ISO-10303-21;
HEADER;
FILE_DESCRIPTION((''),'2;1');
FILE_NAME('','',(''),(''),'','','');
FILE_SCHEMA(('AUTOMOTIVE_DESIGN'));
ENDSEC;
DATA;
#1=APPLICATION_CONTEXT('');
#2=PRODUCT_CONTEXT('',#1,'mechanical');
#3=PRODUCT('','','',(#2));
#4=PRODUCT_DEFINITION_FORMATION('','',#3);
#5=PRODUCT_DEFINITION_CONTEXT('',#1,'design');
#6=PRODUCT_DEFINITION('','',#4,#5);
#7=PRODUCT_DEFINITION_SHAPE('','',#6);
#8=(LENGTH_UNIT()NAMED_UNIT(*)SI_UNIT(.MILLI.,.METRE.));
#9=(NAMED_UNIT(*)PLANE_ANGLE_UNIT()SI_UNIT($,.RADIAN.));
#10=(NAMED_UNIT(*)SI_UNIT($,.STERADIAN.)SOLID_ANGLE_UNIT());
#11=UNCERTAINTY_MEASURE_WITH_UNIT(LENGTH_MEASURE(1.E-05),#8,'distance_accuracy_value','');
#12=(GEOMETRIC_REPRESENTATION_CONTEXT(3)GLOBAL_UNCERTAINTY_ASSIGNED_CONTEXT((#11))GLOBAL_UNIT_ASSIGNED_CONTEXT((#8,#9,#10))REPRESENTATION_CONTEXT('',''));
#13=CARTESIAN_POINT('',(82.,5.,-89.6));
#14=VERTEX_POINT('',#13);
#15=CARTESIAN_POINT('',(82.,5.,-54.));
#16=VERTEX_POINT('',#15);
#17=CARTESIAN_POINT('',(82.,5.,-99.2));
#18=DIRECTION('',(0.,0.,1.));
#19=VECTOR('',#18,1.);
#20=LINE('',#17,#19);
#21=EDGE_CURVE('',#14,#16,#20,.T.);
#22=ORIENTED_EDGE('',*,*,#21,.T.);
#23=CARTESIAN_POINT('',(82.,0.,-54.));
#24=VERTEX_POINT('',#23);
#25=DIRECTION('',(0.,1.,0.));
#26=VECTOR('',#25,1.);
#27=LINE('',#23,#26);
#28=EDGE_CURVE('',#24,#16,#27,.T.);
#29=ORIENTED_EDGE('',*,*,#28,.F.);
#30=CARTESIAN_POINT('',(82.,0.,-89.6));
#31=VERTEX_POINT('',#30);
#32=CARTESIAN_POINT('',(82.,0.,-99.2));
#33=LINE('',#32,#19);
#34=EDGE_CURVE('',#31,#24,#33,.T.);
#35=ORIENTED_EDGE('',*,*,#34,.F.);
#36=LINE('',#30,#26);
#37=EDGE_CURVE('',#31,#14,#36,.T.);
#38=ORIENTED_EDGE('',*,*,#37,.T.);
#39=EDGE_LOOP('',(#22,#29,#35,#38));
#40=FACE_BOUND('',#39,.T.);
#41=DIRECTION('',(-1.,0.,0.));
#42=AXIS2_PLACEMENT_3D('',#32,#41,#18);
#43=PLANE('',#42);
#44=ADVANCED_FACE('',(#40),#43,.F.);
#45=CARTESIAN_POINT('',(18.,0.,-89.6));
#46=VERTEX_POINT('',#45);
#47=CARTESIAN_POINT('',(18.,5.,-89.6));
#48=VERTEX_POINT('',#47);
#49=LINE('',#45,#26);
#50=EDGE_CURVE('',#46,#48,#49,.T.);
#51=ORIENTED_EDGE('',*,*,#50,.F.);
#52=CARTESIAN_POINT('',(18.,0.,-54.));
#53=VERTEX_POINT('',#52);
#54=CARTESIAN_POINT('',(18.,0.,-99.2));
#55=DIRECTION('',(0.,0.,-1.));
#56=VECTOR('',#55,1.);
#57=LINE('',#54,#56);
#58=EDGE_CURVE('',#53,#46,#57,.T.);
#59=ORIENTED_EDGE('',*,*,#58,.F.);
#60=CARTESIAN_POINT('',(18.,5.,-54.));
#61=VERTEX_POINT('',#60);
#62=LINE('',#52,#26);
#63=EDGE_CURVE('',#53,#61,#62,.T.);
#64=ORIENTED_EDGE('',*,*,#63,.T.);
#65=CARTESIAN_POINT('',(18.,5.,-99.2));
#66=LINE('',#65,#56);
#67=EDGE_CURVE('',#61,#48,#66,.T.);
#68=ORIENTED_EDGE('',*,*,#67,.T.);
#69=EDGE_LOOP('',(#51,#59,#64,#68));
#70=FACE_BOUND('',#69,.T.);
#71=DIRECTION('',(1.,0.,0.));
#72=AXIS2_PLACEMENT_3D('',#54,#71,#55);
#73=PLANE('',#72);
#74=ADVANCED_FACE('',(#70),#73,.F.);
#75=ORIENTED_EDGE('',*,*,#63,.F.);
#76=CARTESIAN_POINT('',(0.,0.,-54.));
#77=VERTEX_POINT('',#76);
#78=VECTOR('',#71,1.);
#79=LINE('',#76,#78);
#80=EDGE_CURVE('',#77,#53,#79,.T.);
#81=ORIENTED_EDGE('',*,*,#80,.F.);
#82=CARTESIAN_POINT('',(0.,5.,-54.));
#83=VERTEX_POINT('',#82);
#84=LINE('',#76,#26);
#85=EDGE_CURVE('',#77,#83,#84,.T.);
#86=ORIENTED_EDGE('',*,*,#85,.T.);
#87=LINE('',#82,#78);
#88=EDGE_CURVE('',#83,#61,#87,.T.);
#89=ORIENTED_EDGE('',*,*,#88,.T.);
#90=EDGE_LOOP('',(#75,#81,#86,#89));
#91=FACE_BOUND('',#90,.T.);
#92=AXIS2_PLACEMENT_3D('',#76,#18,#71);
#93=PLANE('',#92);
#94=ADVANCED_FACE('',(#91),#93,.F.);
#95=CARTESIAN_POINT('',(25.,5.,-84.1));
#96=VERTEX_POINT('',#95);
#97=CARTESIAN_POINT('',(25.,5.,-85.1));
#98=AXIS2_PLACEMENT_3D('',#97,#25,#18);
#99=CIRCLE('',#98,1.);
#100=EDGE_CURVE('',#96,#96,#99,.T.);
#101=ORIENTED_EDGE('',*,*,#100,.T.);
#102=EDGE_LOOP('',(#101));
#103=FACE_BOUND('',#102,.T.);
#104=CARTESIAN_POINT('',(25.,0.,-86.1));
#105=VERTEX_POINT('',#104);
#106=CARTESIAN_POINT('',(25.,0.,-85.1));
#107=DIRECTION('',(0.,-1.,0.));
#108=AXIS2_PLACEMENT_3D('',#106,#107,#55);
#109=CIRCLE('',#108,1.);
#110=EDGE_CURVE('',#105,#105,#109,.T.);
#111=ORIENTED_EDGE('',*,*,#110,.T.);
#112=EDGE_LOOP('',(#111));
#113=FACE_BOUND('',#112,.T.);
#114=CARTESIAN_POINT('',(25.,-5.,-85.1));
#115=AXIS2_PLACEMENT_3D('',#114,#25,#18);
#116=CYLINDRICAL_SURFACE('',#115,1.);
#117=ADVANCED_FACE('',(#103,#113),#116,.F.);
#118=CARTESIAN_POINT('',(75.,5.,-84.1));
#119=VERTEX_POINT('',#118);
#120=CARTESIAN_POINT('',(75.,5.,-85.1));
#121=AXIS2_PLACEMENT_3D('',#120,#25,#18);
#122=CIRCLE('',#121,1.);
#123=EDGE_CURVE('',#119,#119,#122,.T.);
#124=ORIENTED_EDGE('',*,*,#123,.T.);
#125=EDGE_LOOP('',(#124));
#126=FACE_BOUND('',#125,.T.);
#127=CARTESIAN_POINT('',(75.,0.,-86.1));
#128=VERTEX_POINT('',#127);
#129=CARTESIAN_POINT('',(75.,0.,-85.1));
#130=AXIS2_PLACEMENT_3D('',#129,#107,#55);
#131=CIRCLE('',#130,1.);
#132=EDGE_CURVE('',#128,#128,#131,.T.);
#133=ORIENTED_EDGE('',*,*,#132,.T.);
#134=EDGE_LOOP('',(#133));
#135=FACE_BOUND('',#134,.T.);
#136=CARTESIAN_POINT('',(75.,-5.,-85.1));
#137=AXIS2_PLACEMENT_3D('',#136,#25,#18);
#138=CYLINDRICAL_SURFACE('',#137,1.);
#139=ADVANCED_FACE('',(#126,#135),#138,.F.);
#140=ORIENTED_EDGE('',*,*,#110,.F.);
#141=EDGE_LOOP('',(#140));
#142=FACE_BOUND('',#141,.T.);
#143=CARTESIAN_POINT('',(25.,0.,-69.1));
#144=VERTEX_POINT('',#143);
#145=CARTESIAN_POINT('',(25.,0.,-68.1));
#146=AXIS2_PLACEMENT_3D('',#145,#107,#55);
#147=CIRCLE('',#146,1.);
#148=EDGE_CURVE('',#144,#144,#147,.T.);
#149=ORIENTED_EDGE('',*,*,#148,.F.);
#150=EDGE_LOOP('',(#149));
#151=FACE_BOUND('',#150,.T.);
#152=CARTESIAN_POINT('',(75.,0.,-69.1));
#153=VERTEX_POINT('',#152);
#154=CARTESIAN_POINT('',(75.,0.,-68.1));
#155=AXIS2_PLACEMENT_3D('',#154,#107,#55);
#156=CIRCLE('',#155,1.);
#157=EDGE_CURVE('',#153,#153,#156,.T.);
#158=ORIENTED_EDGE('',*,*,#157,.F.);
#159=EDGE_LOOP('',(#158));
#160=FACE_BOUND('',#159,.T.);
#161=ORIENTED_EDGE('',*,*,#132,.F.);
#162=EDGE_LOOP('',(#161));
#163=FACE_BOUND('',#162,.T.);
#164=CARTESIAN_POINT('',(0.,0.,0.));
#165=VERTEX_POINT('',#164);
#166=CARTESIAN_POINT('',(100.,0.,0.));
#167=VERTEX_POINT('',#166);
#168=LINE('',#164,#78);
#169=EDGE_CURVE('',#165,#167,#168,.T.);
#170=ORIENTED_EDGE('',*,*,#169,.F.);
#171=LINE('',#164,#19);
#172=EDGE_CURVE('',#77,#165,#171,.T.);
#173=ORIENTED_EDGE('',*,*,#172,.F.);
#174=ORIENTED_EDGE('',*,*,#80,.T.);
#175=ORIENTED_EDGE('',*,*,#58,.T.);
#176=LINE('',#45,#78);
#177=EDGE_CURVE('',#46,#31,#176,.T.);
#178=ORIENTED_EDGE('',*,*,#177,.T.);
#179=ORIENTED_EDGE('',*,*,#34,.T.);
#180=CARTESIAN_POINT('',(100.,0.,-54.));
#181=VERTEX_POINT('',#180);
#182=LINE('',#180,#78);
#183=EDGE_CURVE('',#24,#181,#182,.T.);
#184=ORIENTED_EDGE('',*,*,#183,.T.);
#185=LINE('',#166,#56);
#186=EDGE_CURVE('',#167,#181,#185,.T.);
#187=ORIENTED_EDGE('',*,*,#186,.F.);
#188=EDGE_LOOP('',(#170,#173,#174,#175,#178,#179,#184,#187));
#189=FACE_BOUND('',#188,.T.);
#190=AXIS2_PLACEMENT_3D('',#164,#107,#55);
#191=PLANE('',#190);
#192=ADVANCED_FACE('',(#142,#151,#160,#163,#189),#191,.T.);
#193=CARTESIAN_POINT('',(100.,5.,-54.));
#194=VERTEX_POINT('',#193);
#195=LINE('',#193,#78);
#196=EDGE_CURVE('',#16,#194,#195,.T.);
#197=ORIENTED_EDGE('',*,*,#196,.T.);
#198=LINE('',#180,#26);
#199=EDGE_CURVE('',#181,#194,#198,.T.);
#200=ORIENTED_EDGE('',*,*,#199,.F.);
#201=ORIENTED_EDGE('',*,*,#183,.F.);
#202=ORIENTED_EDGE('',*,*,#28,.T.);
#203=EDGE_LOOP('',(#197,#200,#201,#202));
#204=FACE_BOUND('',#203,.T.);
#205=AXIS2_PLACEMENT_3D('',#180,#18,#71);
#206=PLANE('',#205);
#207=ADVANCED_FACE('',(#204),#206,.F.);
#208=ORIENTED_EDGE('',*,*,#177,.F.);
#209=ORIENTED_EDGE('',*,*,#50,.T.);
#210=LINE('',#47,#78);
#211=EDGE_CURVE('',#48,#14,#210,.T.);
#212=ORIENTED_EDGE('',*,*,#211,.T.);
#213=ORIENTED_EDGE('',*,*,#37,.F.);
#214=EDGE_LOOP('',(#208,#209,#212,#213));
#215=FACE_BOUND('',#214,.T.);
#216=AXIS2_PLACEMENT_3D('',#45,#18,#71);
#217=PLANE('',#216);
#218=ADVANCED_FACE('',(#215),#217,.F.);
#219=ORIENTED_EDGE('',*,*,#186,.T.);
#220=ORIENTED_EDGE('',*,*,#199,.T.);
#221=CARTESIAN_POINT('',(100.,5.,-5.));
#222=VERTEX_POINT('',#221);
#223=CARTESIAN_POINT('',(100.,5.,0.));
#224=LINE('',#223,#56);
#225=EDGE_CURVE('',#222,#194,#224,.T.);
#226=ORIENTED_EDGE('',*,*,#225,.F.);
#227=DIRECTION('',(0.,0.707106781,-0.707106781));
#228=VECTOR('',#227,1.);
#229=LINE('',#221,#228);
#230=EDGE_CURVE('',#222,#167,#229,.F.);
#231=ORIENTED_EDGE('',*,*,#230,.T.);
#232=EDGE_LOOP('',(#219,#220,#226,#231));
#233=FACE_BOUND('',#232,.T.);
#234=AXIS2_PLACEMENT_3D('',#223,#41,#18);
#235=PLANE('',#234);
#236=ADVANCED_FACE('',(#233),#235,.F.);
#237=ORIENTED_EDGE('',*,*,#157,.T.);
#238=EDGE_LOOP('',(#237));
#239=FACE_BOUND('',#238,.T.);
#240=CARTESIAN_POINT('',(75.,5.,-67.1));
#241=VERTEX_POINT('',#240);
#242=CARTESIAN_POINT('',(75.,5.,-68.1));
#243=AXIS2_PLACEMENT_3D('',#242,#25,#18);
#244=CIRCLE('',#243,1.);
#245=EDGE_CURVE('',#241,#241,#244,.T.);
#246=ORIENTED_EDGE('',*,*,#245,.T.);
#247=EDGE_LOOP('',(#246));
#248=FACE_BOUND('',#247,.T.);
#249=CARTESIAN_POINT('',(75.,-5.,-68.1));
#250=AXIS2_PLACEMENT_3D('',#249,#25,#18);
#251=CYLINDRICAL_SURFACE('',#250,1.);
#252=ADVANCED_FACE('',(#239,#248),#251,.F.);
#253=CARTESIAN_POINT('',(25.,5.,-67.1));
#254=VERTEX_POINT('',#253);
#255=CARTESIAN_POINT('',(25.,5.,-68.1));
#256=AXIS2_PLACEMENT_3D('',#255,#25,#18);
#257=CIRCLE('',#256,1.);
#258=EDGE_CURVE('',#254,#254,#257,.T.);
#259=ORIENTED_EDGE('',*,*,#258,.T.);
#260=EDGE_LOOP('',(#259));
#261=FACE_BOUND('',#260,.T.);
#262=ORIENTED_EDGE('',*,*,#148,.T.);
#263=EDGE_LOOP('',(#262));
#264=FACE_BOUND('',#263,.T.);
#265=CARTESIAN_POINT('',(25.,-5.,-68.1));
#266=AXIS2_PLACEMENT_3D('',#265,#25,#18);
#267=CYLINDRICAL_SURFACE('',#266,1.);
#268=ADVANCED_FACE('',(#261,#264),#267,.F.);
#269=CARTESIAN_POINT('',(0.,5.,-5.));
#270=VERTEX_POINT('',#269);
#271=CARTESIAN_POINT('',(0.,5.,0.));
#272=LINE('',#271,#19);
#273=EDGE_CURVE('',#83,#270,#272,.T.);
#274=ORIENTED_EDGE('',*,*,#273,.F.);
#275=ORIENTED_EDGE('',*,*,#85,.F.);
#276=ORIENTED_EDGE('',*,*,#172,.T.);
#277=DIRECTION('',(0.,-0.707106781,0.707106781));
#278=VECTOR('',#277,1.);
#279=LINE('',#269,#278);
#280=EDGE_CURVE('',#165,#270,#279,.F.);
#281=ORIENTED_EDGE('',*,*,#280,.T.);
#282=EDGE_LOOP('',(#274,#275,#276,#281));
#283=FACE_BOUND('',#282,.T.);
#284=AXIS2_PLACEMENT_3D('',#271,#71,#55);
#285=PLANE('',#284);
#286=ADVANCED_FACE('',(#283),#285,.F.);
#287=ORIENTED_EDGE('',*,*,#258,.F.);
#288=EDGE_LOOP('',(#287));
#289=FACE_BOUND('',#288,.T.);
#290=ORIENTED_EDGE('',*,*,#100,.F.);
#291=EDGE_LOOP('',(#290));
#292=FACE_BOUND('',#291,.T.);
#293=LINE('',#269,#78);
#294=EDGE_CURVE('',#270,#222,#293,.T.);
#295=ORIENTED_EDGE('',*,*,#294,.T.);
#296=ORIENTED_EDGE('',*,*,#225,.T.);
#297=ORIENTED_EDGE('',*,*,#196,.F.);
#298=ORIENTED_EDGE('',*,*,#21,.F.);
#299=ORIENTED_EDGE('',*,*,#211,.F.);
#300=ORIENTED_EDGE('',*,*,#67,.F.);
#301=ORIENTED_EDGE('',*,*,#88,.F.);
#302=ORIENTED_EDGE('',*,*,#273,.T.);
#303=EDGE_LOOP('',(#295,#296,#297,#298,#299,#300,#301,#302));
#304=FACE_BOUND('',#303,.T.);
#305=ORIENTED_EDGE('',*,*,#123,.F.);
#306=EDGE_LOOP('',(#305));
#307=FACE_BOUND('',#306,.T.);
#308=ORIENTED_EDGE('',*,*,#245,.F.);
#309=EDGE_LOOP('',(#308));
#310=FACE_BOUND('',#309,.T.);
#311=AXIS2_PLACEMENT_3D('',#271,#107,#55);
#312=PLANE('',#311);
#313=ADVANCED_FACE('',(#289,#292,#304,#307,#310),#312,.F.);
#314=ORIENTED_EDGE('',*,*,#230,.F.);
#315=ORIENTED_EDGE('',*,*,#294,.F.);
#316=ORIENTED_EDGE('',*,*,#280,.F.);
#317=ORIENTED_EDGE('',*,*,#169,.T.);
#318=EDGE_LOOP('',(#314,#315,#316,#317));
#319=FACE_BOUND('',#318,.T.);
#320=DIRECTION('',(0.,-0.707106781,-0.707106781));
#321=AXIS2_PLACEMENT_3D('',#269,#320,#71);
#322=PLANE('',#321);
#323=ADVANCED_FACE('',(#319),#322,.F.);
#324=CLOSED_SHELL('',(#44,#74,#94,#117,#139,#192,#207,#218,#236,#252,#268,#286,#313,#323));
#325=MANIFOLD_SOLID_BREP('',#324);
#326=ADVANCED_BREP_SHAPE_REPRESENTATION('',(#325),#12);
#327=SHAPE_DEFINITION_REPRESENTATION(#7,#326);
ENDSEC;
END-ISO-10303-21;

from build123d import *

# Parameters (mm, degrees)
CROQUIS2_W              = 100
CROQUIS2_H              = 99.2
SALIENTE_EXTRUIR1_DEPTH = 5
CHAFL_N1_SIZE           = 5
CROQUIS3_W              = 18
CROQUIS3_H              = 45.2
CORTAR_EXTRUIR1_DEPTH   = 5
CROQUIS6_R              = 1
CORTAR_EXTRUIR3_DEPTH   = 10
CROQUIS8_W              = 64
CROQUIS8_H              = 9.6
CORTAR_EXTRUIR4_DEPTH   = 141.94552139


with BuildPart() as part:
    # Croquis2 → Saliente-Extruir1 (new body)
    with BuildSketch(Plane(origin=(0, 0, 0), x_dir=(1, 0, 0), z_dir=(0, 1, 0))):
        with Locations((50, 49.6)):
            Rectangle(CROQUIS2_W, CROQUIS2_H)
    extrude(amount=SALIENTE_EXTRUIR1_DEPTH)

    # Chaflán1
    chafl_n1_edges = [part.edges().sort_by_distance(p)[0] for p in [
        (50, 5, 0),
    ]]
    chamfer(chafl_n1_edges, length=CHAFL_N1_SIZE - 0.0001)  # a hair under: the kernel refuses the full size

    # Croquis3 → Cortar-Extruir1 (cut)
    with BuildSketch(Plane(origin=(0, 5, 0), x_dir=(1, 0, 0), z_dir=(0, 1, 0))):
        with Locations((9, 76.6)):
            Rectangle(CROQUIS3_W, CROQUIS3_H)
        with Locations((91, 76.6)):
            Rectangle(CROQUIS3_W, CROQUIS3_H)
    extrude(amount=-CORTAR_EXTRUIR1_DEPTH, mode=Mode.SUBTRACT)

    # Croquis6 → Cortar-Extruir3 (cut)
    with BuildSketch(Plane(origin=(0, 5, 0), x_dir=(1, 0, 0), z_dir=(0, 1, 0))):
        with Locations(Location((25, 85.1, 0), (0, 0, 270))):
            Circle(CROQUIS6_R)
        with Locations(Location((25, 68.1, 0), (0, 0, 270))):
            Circle(CROQUIS6_R)
        with Locations(Location((75, 85.1, 0), (0, 0, 270))):
            Circle(CROQUIS6_R)
        with Locations(Location((75, 68.1, 0), (0, 0, 270))):
            Circle(CROQUIS6_R)
    extrude(amount=-CORTAR_EXTRUIR3_DEPTH, mode=Mode.SUBTRACT)

    # Croquis8 → Cortar-Extruir4 (cut, through all)
    with BuildSketch(Plane(origin=(0, 5, 0), x_dir=(1, 0, 0), z_dir=(0, 1, 0))):
        with Locations((50, 94.4)):
            Rectangle(CROQUIS8_W, CROQUIS8_H)
    extrude(amount=-CORTAR_EXTRUIR4_DEPTH, mode=Mode.SUBTRACT)


solid = part.part
